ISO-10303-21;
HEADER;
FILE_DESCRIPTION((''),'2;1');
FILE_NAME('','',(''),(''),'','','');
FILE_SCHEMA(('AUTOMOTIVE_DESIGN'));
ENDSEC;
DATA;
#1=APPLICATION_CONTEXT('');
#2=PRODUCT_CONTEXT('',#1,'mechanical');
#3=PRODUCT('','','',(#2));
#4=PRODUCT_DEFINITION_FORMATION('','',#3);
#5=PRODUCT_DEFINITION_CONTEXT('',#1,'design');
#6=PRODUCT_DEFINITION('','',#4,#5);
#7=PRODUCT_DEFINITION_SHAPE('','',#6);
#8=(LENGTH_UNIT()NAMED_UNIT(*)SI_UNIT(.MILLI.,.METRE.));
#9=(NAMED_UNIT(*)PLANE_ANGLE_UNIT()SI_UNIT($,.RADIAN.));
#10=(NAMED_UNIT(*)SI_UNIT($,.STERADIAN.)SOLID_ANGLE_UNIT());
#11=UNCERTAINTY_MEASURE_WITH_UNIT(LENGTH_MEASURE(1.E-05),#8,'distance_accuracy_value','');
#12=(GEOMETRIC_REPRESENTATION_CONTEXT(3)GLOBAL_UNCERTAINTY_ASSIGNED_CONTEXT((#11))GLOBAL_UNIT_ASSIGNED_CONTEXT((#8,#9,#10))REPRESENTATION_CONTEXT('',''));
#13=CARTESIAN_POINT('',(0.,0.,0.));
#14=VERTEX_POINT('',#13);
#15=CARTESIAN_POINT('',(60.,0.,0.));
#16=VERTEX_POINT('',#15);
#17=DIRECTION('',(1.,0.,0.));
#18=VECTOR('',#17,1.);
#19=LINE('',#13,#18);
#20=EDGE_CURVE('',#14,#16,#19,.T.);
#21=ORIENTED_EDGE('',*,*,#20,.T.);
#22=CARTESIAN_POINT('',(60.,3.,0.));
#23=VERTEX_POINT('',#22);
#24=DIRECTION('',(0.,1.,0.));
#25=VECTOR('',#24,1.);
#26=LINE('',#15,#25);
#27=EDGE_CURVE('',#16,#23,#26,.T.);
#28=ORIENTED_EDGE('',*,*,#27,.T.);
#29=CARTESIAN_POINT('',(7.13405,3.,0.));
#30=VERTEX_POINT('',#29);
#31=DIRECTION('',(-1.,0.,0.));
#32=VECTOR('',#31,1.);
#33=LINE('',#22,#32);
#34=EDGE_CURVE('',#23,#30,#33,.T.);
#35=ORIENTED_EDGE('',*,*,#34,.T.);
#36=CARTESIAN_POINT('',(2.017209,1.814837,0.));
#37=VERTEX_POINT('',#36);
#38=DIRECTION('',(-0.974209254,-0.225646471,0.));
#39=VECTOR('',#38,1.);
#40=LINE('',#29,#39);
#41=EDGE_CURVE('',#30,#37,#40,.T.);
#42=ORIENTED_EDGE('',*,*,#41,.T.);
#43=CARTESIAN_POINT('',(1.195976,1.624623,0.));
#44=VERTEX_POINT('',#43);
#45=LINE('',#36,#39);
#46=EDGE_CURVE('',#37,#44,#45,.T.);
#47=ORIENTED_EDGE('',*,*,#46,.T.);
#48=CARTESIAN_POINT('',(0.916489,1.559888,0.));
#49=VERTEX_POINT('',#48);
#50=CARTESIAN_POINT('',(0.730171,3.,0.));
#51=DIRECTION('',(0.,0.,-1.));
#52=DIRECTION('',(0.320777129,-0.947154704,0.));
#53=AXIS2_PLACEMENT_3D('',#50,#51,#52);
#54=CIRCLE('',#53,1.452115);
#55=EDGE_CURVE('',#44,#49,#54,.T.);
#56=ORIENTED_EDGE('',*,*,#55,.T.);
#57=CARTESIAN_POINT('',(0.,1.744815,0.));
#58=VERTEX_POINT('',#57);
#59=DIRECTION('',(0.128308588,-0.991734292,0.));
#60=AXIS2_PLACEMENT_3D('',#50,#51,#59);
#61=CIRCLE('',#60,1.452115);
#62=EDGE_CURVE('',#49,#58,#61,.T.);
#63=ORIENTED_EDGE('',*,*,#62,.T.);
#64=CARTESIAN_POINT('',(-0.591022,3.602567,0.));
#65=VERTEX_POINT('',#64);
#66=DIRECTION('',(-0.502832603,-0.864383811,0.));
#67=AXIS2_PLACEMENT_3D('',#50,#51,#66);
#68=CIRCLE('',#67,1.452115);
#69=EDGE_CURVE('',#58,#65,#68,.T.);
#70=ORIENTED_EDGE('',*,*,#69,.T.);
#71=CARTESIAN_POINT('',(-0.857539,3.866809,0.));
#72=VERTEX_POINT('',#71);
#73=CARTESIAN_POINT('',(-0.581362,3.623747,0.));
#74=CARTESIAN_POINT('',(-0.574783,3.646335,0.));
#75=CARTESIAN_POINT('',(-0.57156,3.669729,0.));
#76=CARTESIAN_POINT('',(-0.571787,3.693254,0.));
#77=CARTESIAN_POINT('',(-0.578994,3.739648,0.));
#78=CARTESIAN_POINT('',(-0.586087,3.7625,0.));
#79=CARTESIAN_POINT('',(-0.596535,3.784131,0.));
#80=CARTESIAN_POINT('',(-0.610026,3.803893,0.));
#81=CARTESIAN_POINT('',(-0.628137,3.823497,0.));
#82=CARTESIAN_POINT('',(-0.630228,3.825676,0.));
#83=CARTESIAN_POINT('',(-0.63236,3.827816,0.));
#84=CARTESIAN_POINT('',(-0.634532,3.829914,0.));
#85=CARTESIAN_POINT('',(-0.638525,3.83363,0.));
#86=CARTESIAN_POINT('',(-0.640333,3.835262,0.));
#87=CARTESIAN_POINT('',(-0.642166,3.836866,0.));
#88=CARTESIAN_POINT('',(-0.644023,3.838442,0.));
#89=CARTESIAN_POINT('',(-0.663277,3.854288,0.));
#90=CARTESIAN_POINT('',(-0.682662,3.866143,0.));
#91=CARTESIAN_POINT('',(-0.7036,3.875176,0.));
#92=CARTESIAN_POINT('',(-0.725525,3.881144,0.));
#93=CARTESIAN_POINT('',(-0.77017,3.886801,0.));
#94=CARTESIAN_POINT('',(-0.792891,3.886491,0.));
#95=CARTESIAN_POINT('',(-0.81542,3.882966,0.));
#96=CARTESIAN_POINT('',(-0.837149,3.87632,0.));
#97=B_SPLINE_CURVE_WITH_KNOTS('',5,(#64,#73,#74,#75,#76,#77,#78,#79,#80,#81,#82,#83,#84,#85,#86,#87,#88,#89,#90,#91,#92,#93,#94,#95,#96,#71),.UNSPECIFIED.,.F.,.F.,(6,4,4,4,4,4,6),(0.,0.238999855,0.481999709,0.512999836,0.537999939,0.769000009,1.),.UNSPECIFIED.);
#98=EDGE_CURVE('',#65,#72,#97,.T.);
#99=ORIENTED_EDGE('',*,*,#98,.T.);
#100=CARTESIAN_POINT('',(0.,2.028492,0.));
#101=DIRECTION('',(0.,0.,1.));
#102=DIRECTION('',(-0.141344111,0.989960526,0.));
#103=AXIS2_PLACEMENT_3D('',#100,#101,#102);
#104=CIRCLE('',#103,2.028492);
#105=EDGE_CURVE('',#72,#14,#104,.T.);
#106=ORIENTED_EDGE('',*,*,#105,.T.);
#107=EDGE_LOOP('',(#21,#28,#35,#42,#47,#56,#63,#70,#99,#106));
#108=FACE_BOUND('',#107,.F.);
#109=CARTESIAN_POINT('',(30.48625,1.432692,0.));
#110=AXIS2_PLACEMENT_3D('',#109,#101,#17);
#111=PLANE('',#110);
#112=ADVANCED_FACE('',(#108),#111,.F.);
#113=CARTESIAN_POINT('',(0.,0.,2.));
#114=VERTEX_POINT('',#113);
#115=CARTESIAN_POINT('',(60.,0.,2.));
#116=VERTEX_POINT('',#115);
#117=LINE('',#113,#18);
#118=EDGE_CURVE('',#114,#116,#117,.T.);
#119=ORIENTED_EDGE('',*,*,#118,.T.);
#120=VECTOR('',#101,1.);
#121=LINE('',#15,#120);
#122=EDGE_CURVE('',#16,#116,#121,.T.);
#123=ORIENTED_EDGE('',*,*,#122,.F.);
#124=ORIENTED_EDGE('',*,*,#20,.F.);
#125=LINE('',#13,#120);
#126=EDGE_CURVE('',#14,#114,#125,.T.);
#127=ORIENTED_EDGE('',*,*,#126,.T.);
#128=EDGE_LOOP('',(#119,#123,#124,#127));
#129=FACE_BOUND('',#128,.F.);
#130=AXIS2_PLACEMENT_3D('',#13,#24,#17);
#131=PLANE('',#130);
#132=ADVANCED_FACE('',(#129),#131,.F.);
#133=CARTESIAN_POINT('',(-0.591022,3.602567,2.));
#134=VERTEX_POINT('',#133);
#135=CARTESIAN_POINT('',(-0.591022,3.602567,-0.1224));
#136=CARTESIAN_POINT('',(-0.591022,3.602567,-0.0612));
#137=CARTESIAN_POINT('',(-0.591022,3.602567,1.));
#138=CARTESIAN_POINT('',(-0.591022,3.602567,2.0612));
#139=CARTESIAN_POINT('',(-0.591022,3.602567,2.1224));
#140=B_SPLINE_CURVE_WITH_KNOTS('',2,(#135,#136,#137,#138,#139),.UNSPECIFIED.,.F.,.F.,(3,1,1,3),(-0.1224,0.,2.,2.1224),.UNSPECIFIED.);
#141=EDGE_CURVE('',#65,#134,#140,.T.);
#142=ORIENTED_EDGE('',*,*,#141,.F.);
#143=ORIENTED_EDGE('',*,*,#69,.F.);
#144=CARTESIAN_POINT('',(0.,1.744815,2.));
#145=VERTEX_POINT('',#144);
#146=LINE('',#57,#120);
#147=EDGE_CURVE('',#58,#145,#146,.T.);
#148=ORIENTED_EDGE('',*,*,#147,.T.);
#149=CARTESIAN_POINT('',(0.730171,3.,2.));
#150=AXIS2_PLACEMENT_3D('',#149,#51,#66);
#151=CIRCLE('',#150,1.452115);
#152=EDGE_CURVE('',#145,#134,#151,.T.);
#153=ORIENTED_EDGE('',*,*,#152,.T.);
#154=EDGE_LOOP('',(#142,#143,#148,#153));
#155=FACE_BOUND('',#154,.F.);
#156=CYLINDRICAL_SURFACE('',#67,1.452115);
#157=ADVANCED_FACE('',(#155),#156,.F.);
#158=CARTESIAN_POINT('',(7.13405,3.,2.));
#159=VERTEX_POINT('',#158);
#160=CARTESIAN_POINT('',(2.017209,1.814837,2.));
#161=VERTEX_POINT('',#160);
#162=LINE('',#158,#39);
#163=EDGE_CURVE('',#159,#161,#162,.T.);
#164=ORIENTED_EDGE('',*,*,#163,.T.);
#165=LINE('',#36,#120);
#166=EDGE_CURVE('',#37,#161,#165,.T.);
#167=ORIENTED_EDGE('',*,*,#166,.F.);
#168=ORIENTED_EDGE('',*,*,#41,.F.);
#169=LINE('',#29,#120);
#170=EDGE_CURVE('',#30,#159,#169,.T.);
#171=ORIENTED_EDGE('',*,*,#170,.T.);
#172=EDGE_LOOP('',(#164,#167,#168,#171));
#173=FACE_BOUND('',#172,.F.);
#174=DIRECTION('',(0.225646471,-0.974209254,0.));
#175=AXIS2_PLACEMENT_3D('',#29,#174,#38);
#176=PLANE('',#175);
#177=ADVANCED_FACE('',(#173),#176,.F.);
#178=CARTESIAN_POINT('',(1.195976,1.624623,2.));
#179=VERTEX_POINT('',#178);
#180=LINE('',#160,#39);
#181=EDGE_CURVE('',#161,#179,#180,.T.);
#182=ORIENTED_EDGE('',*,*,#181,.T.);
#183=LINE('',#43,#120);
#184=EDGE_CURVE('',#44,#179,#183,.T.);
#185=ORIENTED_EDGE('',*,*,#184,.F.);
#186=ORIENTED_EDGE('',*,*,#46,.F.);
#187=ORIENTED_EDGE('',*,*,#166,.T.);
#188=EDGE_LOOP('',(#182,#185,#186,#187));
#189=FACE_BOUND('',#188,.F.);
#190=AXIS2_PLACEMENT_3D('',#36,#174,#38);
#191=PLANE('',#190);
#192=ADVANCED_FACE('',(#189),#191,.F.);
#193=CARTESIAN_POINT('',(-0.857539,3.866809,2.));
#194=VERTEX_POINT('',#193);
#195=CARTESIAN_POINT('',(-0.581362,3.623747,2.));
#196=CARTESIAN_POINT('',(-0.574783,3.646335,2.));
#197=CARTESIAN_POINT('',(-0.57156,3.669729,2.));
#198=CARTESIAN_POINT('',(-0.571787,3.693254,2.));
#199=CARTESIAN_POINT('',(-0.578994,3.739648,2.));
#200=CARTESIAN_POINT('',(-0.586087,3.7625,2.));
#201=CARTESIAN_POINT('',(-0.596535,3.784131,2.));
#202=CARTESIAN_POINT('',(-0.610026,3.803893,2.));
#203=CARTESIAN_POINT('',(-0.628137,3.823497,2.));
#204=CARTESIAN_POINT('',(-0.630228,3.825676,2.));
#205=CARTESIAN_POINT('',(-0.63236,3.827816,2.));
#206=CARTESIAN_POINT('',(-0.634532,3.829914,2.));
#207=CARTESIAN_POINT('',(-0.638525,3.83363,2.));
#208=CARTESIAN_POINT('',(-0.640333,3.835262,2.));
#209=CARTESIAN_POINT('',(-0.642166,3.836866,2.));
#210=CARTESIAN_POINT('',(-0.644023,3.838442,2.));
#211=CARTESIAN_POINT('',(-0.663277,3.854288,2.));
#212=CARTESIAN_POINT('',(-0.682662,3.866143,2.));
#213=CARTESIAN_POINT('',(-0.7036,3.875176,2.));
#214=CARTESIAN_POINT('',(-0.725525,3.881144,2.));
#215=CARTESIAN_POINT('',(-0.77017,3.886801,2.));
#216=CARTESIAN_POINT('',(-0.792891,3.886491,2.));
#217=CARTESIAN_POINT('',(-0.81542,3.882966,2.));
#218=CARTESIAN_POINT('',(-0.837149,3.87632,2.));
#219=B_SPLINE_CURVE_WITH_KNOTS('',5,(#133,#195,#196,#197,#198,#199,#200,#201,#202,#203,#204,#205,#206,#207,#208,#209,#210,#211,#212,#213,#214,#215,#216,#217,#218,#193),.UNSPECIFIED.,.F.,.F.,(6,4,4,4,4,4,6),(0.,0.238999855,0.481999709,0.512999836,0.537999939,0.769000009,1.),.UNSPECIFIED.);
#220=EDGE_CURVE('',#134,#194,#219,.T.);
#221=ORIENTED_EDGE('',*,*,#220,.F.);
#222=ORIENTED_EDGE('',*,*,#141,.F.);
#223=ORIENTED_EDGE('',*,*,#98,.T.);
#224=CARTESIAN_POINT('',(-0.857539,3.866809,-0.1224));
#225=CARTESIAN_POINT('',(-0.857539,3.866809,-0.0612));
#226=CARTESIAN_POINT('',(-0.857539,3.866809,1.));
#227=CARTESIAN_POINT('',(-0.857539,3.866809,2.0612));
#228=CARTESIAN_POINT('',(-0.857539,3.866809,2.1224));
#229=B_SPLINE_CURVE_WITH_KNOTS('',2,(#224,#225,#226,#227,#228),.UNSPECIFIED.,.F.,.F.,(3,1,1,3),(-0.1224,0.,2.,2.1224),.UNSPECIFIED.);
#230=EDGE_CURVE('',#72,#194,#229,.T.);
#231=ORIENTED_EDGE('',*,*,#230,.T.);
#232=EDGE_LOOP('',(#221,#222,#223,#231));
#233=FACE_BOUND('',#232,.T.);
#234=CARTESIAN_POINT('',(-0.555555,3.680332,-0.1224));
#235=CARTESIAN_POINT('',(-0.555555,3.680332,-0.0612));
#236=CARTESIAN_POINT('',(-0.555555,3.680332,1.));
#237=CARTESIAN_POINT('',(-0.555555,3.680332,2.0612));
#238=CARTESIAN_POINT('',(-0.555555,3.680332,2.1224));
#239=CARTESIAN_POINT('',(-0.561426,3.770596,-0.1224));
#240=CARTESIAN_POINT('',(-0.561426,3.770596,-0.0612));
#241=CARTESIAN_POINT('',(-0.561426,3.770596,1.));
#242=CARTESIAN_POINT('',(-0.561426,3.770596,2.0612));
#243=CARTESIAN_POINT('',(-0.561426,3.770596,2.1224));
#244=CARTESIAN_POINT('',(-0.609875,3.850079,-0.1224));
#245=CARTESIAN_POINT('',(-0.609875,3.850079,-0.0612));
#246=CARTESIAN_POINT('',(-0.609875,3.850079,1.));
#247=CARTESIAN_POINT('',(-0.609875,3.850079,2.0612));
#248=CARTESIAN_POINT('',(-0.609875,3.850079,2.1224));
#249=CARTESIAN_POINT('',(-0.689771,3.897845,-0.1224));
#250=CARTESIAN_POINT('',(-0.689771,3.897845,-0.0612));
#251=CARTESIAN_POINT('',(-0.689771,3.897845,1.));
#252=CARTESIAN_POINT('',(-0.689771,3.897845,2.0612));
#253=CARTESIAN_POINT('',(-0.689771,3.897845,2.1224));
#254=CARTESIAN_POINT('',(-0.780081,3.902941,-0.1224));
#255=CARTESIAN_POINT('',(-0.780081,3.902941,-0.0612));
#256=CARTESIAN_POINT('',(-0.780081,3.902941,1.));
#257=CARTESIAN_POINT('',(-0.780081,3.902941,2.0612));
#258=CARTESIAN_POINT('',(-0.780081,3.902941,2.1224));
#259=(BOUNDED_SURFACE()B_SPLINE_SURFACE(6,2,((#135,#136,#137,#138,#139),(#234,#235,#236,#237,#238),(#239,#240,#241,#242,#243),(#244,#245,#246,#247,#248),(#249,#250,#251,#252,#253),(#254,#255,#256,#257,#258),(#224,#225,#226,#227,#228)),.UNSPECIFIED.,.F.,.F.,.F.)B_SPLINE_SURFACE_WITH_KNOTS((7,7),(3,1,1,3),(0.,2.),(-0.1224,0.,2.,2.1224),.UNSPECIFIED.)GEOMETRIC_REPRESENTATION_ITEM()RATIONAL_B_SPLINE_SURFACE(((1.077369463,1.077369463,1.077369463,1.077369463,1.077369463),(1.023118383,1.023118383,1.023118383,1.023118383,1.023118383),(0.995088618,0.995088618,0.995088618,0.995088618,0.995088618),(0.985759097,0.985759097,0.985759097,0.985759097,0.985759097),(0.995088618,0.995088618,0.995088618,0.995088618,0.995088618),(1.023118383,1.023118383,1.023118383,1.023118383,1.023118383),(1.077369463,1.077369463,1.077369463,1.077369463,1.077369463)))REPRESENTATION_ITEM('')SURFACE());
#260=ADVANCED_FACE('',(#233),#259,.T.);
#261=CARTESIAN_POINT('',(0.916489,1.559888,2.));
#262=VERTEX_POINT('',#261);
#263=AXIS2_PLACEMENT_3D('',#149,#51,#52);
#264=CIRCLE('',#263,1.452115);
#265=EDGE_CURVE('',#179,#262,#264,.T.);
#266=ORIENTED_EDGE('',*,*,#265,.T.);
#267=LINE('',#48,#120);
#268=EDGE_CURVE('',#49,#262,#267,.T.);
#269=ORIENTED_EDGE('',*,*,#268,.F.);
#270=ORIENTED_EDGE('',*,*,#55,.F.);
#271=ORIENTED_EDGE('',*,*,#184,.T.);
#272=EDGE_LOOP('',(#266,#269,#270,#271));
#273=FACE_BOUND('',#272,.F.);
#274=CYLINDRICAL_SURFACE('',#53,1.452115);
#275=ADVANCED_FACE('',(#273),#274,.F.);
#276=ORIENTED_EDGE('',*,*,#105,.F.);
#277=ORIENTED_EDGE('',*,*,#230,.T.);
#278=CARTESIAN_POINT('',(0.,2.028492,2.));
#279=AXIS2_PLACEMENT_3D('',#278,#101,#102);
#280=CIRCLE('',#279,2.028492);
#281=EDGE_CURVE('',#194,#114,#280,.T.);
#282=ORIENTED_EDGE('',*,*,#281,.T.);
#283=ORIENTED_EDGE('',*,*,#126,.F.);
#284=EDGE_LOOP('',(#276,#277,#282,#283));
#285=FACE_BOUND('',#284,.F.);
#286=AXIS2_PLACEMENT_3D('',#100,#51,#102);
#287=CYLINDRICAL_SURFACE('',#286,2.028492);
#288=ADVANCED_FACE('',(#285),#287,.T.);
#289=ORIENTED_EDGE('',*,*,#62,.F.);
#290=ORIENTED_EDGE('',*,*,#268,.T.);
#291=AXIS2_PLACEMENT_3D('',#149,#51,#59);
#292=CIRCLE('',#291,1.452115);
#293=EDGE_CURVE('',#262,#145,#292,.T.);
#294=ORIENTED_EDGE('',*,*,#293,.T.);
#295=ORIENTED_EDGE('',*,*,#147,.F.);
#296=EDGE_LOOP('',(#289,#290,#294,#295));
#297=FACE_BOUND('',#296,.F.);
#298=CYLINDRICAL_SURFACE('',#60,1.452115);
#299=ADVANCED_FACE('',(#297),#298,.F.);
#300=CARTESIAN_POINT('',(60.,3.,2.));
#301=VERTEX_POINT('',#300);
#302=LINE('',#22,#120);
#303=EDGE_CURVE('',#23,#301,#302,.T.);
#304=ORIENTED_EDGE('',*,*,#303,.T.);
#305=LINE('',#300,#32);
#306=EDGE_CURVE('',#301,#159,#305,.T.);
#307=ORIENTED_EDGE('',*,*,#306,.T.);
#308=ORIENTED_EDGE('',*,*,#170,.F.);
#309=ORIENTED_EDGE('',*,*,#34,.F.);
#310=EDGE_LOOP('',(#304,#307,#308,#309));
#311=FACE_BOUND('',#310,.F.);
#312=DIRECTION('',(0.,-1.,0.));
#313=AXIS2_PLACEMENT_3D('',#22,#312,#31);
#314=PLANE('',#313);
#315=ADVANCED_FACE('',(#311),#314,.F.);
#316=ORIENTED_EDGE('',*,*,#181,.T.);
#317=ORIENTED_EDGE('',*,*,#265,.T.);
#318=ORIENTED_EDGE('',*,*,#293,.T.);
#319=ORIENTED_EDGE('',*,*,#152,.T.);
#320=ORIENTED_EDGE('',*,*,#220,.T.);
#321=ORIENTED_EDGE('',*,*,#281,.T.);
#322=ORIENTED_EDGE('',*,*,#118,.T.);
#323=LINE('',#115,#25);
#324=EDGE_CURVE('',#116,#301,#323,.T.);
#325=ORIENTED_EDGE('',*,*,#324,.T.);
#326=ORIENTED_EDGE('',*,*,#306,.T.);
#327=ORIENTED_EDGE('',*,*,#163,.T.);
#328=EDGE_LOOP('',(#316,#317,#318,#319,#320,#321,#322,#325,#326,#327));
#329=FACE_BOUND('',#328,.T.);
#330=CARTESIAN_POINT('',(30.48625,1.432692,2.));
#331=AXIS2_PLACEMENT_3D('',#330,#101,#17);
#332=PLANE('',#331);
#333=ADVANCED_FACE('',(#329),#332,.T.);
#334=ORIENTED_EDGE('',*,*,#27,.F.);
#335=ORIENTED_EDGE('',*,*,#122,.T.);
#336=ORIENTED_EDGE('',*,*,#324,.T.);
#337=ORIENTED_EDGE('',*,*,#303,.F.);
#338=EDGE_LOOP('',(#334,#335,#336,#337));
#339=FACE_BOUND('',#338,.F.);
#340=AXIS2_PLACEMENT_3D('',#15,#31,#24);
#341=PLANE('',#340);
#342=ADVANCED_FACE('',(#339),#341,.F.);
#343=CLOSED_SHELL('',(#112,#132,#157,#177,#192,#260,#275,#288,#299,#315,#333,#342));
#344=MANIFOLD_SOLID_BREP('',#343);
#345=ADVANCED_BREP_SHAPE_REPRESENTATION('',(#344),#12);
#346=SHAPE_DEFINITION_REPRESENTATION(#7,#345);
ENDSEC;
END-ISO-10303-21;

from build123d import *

# Parameters (mm, degrees)
F1_DEPTH = 2
F2_R     = 0.2


with BuildPart() as f1:
    # F0 (on Top) → F1 (new body)
    with BuildSketch(Plane.XY):
        with BuildLine():
            ThreePointArc((2.0172090196, 1.8148367186), (1.3567207288, 0.5204837279), (0, 0))
            Line((0, 0), (60, 0))
            Line((60, 0), (60, 3))
            Line((60, 3), (7.1340496652, 3))
            Line((7.1340496652, 3), (2.0172090196, 1.8148367186))
        make_face()
        with BuildLine():
            ThreePointArc((-0.286715437, 4.0366195626), (-2.023394625, 1.8847733915), (0, 0))
            Line((0, 0), (0, 1.744815443))
            ThreePointArc((0, 1.744815443), (-0.710712171, 2.8197388016), (-0.286715437, 4.0366195626))
        make_face()
        with BuildLine():
            Line((0, 1.744815443), (0, 0))
            ThreePointArc((0, 0), (1.3567207288, 0.5204837279), (2.0172090196, 1.8148367186))
            Line((2.0172090196, 1.8148367186), (1.1959759108, 1.6246226015))
            ThreePointArc((1.1959759108, 1.6246226015), (1.0578352718, 1.5853362888), (0.9164894863, 1.5598879203))
            ThreePointArc((0.9164894863, 1.5598879203), (0.4429542769, 1.5765730666), (0, 1.744815443))
        make_face()
    extrude(amount=F1_DEPTH)

    # F2
    f2_edges = [f1.edges().sort_by_distance(p)[0] for p in [
        (-0.286715, 4.03662, 1),
    ]]
    fillet(f2_edges, radius=F2_R)


solid = f1.part
